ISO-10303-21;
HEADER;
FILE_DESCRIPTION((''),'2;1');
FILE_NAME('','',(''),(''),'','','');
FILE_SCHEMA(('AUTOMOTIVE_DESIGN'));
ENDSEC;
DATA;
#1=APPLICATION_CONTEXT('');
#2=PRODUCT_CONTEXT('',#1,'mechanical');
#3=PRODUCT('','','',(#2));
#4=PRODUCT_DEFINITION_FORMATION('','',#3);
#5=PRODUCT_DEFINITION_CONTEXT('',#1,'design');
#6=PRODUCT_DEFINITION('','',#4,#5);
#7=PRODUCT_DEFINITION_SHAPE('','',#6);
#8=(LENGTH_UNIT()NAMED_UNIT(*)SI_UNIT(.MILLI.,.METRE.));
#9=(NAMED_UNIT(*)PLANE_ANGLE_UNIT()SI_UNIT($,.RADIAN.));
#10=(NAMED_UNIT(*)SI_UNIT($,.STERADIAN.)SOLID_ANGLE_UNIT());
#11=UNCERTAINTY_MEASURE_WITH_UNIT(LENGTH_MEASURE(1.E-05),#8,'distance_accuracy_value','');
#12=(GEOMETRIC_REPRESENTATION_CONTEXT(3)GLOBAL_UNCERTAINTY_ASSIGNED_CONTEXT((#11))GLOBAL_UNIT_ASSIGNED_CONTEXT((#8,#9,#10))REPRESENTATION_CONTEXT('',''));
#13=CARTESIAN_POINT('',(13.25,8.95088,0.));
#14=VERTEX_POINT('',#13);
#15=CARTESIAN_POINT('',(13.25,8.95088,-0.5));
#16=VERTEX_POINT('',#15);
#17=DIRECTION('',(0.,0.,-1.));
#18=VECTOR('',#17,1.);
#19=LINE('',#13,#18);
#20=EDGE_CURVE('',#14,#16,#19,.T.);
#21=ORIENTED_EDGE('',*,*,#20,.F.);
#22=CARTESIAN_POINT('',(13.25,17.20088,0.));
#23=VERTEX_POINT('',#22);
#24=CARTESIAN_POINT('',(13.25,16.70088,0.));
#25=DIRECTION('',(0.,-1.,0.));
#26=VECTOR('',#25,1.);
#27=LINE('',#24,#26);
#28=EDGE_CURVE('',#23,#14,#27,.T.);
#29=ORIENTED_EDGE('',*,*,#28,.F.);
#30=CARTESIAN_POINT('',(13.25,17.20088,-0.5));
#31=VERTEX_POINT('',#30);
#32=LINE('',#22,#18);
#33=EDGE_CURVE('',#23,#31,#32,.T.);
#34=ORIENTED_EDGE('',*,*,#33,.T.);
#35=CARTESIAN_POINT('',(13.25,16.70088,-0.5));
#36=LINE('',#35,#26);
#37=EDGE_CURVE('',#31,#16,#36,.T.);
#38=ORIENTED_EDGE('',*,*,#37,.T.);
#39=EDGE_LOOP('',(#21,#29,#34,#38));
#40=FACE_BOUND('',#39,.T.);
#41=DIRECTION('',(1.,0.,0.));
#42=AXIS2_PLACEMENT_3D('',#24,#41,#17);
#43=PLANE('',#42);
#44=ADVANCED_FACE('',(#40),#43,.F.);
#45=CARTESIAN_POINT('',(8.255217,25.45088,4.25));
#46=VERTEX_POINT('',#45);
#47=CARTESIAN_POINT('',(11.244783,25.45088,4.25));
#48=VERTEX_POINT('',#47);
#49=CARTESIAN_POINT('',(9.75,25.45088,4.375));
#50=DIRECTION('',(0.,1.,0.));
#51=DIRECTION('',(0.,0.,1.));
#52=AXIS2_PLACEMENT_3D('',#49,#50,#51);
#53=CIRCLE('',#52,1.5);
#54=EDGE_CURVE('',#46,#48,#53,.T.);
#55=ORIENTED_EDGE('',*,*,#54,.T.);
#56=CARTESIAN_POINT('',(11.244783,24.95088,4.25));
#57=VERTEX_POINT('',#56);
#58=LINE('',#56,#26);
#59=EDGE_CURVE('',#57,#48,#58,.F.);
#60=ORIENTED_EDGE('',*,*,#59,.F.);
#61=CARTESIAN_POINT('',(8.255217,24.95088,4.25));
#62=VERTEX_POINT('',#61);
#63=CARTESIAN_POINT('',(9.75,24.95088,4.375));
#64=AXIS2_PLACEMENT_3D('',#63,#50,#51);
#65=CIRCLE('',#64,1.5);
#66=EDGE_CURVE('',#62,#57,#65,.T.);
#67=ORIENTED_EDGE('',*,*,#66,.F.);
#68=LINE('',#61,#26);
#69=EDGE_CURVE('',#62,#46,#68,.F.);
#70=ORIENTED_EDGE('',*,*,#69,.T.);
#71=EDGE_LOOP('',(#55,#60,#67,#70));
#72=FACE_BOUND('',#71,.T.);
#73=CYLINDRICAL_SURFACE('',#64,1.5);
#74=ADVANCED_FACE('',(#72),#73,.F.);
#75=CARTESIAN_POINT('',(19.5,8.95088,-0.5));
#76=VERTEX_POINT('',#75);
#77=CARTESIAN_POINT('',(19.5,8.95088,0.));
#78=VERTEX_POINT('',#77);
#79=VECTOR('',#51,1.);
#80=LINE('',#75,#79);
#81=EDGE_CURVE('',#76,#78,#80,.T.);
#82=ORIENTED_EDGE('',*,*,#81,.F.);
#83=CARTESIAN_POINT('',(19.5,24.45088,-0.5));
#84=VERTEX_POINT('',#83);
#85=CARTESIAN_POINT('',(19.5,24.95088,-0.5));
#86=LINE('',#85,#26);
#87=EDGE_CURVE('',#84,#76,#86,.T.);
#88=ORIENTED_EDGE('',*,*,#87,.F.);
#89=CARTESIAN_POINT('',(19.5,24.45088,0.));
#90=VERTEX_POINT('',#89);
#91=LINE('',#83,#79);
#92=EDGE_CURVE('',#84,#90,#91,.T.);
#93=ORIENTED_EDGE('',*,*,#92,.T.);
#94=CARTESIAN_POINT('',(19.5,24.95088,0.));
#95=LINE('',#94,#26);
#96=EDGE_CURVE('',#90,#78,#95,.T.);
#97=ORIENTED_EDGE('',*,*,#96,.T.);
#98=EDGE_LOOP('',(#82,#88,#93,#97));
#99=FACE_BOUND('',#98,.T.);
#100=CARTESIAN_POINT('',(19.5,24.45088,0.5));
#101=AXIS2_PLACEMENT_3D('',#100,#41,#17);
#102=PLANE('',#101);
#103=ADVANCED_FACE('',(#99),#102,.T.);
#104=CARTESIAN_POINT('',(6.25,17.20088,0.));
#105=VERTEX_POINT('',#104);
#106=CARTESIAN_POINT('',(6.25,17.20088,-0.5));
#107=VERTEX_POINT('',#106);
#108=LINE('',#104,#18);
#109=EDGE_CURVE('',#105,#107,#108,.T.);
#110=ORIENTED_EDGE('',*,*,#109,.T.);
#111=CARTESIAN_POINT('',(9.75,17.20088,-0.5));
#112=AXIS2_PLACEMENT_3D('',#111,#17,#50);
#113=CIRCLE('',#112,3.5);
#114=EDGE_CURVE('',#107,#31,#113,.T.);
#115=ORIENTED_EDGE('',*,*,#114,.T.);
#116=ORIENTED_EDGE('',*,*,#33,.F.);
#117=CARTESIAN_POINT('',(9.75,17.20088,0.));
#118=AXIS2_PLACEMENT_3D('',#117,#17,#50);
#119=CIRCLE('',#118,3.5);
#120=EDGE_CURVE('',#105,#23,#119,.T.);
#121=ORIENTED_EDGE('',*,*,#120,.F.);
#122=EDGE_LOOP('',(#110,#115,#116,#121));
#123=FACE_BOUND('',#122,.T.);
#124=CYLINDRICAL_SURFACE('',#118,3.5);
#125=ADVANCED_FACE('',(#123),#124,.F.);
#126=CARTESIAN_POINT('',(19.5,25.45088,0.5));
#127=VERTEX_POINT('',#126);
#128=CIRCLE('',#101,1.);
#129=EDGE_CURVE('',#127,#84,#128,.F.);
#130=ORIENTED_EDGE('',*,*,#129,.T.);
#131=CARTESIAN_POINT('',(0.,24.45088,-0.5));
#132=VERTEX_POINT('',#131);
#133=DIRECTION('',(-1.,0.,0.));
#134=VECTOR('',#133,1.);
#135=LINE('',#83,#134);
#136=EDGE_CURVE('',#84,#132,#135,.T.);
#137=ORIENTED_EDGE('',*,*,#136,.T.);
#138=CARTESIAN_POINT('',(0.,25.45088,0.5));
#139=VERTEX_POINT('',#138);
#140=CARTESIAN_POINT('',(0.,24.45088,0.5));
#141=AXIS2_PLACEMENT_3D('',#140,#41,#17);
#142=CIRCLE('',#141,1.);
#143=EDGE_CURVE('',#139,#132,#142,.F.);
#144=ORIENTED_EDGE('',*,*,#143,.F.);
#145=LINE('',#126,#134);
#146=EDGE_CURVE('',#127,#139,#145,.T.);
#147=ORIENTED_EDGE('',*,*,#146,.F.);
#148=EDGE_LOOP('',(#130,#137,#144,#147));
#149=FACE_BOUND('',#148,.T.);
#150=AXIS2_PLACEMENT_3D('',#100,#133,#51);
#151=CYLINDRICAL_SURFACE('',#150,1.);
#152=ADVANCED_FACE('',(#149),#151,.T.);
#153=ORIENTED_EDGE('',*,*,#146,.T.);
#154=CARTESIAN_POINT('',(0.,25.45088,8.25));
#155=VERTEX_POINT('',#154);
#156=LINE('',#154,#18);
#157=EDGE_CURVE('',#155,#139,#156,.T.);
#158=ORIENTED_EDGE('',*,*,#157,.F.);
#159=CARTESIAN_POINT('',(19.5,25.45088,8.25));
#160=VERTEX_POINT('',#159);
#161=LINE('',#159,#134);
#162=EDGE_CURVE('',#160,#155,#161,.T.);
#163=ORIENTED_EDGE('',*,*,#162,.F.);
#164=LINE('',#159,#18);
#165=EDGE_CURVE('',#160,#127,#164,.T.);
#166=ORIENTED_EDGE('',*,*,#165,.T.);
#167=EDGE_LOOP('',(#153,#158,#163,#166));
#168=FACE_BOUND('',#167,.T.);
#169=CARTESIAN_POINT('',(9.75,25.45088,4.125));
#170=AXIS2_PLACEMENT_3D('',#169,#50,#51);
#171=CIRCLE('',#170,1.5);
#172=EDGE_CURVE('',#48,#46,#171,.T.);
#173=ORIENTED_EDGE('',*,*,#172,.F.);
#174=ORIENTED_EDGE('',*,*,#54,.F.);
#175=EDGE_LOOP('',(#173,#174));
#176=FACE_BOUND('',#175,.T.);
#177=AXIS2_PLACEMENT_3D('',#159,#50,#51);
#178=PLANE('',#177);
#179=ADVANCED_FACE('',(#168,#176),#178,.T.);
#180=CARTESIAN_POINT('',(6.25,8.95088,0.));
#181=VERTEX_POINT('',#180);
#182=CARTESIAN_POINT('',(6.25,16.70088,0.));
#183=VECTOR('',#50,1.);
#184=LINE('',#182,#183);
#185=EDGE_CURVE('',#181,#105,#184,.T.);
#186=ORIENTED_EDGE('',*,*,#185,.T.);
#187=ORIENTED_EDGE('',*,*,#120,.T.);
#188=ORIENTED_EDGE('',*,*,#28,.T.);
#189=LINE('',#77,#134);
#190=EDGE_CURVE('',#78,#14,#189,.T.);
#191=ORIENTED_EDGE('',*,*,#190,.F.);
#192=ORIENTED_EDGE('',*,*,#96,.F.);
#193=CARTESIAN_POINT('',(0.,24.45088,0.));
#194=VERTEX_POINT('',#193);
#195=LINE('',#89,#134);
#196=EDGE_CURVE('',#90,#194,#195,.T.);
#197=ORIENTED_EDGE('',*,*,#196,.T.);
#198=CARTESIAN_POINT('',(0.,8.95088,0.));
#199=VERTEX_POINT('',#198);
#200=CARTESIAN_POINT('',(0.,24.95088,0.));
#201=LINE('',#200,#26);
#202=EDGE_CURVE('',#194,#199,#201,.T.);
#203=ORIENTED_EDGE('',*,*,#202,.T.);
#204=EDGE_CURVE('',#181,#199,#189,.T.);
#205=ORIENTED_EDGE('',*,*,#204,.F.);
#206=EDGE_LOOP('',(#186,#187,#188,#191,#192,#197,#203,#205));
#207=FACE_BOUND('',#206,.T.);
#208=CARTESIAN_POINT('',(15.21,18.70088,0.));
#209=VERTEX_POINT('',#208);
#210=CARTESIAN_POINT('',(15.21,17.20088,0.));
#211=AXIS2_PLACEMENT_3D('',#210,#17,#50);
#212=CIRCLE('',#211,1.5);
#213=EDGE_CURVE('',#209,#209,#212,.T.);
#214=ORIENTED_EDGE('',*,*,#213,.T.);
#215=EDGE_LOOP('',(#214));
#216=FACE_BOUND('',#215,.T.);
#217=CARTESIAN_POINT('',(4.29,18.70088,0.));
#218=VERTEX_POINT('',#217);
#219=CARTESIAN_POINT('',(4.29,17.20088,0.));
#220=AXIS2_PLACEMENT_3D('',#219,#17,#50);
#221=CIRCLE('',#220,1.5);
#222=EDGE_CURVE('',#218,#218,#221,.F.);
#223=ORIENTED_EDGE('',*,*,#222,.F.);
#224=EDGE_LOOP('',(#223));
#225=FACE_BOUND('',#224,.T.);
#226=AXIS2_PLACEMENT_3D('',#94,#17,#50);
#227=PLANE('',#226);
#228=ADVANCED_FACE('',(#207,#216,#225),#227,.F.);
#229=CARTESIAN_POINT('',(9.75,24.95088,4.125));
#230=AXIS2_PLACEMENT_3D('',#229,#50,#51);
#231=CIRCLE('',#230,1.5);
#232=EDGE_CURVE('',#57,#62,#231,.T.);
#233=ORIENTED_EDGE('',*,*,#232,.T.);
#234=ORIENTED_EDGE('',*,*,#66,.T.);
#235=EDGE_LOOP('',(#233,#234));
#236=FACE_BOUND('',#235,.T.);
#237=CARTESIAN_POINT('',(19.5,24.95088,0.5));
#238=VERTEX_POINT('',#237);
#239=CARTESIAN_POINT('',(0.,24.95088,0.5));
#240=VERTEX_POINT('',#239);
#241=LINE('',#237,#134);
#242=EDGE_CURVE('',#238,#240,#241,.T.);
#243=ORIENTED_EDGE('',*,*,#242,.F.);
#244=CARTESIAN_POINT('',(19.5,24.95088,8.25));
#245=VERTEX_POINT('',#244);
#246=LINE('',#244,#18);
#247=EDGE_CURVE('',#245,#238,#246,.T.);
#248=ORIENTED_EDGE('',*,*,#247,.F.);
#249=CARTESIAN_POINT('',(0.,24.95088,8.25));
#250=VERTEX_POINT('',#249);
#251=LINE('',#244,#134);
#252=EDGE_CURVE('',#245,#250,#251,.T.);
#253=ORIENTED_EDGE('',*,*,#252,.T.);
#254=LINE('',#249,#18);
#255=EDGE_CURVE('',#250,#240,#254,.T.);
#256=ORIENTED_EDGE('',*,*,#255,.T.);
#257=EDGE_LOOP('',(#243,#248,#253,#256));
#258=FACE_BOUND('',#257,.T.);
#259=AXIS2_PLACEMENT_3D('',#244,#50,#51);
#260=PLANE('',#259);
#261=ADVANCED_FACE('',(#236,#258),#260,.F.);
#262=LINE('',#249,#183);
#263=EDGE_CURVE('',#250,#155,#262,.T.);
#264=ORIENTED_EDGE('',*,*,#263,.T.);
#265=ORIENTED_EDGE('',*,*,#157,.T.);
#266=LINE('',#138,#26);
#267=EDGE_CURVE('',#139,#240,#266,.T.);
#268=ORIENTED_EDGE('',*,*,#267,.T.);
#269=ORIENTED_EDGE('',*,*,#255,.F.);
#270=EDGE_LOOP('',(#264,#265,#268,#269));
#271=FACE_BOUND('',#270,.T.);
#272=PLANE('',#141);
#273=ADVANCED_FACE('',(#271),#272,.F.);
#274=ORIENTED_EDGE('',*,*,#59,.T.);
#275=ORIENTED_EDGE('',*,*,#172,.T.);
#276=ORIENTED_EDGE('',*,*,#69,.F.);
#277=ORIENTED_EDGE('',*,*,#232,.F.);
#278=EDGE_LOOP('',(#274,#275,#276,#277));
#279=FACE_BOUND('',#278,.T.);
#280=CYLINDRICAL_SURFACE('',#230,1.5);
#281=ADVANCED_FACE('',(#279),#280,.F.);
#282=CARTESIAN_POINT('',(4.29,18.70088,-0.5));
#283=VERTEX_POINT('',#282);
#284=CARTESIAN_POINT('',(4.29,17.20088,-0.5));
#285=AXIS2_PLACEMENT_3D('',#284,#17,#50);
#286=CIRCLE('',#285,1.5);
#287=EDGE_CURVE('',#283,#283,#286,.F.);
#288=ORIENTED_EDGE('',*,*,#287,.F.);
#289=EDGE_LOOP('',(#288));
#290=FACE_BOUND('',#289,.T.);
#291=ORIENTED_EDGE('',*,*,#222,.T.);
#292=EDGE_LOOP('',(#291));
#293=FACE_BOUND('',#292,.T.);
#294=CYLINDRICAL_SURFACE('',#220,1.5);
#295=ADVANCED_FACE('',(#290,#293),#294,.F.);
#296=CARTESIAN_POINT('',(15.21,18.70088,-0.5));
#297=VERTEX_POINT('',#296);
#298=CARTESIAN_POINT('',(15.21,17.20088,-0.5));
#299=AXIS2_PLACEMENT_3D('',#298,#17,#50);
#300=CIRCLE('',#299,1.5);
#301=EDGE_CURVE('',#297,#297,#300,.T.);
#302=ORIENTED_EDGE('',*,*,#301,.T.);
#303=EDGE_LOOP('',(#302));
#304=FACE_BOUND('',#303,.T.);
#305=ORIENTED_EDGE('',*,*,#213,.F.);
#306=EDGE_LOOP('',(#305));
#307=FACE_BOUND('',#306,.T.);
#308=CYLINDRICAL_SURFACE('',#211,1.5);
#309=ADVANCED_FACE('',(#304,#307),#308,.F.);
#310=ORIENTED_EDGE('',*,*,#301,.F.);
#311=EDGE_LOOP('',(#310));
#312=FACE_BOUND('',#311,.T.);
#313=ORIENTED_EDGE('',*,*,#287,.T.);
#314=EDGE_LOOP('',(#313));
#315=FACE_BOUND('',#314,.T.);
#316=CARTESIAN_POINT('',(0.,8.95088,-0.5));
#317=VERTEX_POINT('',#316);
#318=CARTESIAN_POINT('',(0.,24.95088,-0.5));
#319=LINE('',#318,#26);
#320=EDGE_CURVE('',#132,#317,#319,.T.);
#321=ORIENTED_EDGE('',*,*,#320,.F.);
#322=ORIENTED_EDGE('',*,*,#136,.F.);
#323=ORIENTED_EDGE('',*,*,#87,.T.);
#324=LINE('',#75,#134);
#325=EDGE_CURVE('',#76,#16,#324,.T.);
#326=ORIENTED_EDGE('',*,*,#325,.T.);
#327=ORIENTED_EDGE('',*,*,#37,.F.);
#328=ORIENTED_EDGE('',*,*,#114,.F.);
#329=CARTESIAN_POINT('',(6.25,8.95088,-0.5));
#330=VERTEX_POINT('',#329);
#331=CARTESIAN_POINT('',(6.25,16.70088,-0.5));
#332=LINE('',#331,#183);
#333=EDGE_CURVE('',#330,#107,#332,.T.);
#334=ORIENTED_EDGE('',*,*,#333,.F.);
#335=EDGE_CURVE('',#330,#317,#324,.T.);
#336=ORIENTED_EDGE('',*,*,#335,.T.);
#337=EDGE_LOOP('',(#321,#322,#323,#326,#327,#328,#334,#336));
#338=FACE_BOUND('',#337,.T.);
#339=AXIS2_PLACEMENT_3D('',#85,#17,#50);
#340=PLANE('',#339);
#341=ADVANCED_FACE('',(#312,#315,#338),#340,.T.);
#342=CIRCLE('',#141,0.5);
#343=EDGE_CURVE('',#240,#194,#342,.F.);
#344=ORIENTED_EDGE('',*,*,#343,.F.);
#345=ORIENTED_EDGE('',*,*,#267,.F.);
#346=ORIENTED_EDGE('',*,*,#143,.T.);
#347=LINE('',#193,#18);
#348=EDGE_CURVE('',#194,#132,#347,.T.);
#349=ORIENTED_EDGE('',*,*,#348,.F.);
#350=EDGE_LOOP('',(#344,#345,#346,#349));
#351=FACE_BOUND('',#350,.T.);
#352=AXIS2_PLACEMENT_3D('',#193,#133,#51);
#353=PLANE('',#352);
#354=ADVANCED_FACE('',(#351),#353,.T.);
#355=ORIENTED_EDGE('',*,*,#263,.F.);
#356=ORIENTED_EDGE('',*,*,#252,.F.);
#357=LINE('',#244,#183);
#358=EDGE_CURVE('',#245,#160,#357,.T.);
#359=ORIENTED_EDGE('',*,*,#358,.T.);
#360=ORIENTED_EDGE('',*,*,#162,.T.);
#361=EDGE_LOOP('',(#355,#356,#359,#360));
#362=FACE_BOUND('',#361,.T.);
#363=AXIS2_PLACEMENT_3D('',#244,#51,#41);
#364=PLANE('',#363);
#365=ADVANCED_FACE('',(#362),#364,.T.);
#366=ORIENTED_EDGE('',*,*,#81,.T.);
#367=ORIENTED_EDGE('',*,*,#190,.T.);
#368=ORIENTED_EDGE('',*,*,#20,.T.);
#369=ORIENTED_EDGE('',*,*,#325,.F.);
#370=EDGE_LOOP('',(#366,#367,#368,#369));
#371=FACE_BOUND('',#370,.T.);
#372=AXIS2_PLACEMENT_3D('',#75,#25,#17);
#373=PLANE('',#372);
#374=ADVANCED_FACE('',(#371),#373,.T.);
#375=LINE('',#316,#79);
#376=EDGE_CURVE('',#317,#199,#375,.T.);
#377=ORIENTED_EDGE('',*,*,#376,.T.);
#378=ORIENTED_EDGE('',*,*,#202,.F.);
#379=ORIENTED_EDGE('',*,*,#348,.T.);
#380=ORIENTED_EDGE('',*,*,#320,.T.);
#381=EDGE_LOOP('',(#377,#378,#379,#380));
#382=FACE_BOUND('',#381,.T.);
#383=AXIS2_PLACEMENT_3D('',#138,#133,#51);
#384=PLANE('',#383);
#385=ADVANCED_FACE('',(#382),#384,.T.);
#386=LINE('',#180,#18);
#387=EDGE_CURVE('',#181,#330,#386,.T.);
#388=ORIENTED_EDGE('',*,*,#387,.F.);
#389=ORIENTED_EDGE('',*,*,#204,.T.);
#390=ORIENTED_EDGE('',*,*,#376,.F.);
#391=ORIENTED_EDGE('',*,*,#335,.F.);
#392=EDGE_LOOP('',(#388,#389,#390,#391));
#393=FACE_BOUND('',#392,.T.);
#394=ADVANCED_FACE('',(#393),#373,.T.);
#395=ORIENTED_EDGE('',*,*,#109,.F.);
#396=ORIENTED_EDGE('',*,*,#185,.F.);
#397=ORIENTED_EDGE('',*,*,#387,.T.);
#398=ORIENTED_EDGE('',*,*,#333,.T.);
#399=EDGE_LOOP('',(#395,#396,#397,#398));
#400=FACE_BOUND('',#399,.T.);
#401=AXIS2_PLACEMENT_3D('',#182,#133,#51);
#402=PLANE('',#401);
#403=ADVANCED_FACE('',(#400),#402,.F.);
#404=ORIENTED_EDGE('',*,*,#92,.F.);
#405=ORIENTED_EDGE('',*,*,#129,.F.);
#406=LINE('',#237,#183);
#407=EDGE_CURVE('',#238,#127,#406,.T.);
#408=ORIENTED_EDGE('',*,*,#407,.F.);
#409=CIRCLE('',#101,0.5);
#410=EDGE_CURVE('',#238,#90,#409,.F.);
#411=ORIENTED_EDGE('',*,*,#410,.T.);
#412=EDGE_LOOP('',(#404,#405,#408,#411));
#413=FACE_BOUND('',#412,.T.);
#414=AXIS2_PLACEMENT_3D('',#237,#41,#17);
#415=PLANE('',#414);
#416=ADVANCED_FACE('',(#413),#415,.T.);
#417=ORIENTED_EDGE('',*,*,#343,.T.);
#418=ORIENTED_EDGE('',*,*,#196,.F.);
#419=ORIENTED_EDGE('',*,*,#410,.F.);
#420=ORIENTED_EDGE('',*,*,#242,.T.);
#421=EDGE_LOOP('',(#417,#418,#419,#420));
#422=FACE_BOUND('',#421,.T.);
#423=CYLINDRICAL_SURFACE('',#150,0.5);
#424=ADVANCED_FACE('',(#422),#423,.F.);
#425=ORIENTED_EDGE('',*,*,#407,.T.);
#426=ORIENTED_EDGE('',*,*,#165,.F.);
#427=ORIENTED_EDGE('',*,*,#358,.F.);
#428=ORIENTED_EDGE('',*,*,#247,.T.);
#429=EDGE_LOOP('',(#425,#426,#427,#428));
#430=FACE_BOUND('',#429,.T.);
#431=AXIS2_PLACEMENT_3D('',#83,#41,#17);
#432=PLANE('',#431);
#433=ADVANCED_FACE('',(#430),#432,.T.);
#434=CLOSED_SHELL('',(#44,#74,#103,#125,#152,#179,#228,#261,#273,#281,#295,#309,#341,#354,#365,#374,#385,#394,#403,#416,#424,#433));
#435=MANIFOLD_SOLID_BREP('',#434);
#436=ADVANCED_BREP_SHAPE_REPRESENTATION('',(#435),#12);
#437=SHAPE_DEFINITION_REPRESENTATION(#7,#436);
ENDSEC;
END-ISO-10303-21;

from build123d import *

# Parameters (mm, degrees)
BRIDA_BASE1_DEPTH     = 19.5
CROQUIS9_R            = 1.5
CORTAR_EXTRUIR4_DEPTH = 0.5
CROQUIS10_R           = 1.5
CORTAR_EXTRUIR5_DEPTH = 0.5
CROQUIS8_R            = 1.5
CORTAR_EXTRUIR3_DEPTH = 10


# Sheet-metal steps are written as plain solids
with BuildPart() as part:
    # Croquis1 → Brida base1 (new body)
    with BuildSketch(Plane(origin=(0, 0, 0), x_dir=(0, 0, -1), z_dir=(1, 0, 0))):
        with BuildLine():
            Line((-8.25, 24.950879865), (-0.5, 24.950879865))
            ThreePointArc((-0.5, 24.950879865), (-0.146446609, 24.804433255), (0, 24.450879865))
            Line((0, 24.450879865), (0, 8.950879865))
            Line((0, 8.950879865), (0.5, 8.950879865))
            Line((0.5, 8.950879865), (0.5, 24.450879865))
            ThreePointArc((0.5, 24.450879865), (0.207106781, 25.157986646), (-0.5, 25.450879865))
            Line((-0.5, 25.450879865), (-8.25, 25.450879865))
            Line((-8.25, 25.450879865), (-8.25, 24.950879865))
        make_face()
    extrude(amount=BRIDA_BASE1_DEPTH)

    # Croquis9 → Cortar-Extruir4 (cut)
    with BuildSketch(Plane(origin=(0, 0, -0.5), x_dir=(-1, 0, 0), z_dir=(0, 0, -1))):
        with BuildLine():
            ThreePointArc((-6.25, 17.200879865), (-9.75, 20.700879865), (-13.25, 17.200879865))
            Line((-13.25, 17.200879865), (-13.25, 8.950879865))
            Line((-13.25, 8.950879865), (-6.25, 8.950879865))
            Line((-6.25, 8.950879865), (-6.25, 17.200879865))
        make_face()
        with Locations(Location((-15.21, 17.200879865, 0), (0, 0, 90))):
            Circle(CROQUIS9_R)
        with Locations(Location((-4.29, 17.200879865, 0), (0, 0, 90))):
            Circle(CROQUIS9_R)
    extrude(amount=-CORTAR_EXTRUIR4_DEPTH, mode=Mode.SUBTRACT)

    # Croquis10 → Cortar-Extruir5 (cut)
    with BuildSketch(Plane(origin=(0, 25.450879865, 0), x_dir=(1, 0, 0), z_dir=(0, 1, 0))):
        with Locations(Location((9.75, -4.375, 0), (0, 0, 270))):
            Circle(CROQUIS10_R)
    extrude(amount=-CORTAR_EXTRUIR5_DEPTH, mode=Mode.SUBTRACT)

    # Croquis8 → Cortar-Extruir3 (cut)
    with BuildSketch(Plane(origin=(0, 25.450879865, 0), x_dir=(1, 0, 0), z_dir=(0, 1, 0))):
        with Locations((9.75, -4.125)):
            Circle(CROQUIS8_R)
    extrude(amount=-CORTAR_EXTRUIR3_DEPTH, mode=Mode.SUBTRACT)


solid = part.part
